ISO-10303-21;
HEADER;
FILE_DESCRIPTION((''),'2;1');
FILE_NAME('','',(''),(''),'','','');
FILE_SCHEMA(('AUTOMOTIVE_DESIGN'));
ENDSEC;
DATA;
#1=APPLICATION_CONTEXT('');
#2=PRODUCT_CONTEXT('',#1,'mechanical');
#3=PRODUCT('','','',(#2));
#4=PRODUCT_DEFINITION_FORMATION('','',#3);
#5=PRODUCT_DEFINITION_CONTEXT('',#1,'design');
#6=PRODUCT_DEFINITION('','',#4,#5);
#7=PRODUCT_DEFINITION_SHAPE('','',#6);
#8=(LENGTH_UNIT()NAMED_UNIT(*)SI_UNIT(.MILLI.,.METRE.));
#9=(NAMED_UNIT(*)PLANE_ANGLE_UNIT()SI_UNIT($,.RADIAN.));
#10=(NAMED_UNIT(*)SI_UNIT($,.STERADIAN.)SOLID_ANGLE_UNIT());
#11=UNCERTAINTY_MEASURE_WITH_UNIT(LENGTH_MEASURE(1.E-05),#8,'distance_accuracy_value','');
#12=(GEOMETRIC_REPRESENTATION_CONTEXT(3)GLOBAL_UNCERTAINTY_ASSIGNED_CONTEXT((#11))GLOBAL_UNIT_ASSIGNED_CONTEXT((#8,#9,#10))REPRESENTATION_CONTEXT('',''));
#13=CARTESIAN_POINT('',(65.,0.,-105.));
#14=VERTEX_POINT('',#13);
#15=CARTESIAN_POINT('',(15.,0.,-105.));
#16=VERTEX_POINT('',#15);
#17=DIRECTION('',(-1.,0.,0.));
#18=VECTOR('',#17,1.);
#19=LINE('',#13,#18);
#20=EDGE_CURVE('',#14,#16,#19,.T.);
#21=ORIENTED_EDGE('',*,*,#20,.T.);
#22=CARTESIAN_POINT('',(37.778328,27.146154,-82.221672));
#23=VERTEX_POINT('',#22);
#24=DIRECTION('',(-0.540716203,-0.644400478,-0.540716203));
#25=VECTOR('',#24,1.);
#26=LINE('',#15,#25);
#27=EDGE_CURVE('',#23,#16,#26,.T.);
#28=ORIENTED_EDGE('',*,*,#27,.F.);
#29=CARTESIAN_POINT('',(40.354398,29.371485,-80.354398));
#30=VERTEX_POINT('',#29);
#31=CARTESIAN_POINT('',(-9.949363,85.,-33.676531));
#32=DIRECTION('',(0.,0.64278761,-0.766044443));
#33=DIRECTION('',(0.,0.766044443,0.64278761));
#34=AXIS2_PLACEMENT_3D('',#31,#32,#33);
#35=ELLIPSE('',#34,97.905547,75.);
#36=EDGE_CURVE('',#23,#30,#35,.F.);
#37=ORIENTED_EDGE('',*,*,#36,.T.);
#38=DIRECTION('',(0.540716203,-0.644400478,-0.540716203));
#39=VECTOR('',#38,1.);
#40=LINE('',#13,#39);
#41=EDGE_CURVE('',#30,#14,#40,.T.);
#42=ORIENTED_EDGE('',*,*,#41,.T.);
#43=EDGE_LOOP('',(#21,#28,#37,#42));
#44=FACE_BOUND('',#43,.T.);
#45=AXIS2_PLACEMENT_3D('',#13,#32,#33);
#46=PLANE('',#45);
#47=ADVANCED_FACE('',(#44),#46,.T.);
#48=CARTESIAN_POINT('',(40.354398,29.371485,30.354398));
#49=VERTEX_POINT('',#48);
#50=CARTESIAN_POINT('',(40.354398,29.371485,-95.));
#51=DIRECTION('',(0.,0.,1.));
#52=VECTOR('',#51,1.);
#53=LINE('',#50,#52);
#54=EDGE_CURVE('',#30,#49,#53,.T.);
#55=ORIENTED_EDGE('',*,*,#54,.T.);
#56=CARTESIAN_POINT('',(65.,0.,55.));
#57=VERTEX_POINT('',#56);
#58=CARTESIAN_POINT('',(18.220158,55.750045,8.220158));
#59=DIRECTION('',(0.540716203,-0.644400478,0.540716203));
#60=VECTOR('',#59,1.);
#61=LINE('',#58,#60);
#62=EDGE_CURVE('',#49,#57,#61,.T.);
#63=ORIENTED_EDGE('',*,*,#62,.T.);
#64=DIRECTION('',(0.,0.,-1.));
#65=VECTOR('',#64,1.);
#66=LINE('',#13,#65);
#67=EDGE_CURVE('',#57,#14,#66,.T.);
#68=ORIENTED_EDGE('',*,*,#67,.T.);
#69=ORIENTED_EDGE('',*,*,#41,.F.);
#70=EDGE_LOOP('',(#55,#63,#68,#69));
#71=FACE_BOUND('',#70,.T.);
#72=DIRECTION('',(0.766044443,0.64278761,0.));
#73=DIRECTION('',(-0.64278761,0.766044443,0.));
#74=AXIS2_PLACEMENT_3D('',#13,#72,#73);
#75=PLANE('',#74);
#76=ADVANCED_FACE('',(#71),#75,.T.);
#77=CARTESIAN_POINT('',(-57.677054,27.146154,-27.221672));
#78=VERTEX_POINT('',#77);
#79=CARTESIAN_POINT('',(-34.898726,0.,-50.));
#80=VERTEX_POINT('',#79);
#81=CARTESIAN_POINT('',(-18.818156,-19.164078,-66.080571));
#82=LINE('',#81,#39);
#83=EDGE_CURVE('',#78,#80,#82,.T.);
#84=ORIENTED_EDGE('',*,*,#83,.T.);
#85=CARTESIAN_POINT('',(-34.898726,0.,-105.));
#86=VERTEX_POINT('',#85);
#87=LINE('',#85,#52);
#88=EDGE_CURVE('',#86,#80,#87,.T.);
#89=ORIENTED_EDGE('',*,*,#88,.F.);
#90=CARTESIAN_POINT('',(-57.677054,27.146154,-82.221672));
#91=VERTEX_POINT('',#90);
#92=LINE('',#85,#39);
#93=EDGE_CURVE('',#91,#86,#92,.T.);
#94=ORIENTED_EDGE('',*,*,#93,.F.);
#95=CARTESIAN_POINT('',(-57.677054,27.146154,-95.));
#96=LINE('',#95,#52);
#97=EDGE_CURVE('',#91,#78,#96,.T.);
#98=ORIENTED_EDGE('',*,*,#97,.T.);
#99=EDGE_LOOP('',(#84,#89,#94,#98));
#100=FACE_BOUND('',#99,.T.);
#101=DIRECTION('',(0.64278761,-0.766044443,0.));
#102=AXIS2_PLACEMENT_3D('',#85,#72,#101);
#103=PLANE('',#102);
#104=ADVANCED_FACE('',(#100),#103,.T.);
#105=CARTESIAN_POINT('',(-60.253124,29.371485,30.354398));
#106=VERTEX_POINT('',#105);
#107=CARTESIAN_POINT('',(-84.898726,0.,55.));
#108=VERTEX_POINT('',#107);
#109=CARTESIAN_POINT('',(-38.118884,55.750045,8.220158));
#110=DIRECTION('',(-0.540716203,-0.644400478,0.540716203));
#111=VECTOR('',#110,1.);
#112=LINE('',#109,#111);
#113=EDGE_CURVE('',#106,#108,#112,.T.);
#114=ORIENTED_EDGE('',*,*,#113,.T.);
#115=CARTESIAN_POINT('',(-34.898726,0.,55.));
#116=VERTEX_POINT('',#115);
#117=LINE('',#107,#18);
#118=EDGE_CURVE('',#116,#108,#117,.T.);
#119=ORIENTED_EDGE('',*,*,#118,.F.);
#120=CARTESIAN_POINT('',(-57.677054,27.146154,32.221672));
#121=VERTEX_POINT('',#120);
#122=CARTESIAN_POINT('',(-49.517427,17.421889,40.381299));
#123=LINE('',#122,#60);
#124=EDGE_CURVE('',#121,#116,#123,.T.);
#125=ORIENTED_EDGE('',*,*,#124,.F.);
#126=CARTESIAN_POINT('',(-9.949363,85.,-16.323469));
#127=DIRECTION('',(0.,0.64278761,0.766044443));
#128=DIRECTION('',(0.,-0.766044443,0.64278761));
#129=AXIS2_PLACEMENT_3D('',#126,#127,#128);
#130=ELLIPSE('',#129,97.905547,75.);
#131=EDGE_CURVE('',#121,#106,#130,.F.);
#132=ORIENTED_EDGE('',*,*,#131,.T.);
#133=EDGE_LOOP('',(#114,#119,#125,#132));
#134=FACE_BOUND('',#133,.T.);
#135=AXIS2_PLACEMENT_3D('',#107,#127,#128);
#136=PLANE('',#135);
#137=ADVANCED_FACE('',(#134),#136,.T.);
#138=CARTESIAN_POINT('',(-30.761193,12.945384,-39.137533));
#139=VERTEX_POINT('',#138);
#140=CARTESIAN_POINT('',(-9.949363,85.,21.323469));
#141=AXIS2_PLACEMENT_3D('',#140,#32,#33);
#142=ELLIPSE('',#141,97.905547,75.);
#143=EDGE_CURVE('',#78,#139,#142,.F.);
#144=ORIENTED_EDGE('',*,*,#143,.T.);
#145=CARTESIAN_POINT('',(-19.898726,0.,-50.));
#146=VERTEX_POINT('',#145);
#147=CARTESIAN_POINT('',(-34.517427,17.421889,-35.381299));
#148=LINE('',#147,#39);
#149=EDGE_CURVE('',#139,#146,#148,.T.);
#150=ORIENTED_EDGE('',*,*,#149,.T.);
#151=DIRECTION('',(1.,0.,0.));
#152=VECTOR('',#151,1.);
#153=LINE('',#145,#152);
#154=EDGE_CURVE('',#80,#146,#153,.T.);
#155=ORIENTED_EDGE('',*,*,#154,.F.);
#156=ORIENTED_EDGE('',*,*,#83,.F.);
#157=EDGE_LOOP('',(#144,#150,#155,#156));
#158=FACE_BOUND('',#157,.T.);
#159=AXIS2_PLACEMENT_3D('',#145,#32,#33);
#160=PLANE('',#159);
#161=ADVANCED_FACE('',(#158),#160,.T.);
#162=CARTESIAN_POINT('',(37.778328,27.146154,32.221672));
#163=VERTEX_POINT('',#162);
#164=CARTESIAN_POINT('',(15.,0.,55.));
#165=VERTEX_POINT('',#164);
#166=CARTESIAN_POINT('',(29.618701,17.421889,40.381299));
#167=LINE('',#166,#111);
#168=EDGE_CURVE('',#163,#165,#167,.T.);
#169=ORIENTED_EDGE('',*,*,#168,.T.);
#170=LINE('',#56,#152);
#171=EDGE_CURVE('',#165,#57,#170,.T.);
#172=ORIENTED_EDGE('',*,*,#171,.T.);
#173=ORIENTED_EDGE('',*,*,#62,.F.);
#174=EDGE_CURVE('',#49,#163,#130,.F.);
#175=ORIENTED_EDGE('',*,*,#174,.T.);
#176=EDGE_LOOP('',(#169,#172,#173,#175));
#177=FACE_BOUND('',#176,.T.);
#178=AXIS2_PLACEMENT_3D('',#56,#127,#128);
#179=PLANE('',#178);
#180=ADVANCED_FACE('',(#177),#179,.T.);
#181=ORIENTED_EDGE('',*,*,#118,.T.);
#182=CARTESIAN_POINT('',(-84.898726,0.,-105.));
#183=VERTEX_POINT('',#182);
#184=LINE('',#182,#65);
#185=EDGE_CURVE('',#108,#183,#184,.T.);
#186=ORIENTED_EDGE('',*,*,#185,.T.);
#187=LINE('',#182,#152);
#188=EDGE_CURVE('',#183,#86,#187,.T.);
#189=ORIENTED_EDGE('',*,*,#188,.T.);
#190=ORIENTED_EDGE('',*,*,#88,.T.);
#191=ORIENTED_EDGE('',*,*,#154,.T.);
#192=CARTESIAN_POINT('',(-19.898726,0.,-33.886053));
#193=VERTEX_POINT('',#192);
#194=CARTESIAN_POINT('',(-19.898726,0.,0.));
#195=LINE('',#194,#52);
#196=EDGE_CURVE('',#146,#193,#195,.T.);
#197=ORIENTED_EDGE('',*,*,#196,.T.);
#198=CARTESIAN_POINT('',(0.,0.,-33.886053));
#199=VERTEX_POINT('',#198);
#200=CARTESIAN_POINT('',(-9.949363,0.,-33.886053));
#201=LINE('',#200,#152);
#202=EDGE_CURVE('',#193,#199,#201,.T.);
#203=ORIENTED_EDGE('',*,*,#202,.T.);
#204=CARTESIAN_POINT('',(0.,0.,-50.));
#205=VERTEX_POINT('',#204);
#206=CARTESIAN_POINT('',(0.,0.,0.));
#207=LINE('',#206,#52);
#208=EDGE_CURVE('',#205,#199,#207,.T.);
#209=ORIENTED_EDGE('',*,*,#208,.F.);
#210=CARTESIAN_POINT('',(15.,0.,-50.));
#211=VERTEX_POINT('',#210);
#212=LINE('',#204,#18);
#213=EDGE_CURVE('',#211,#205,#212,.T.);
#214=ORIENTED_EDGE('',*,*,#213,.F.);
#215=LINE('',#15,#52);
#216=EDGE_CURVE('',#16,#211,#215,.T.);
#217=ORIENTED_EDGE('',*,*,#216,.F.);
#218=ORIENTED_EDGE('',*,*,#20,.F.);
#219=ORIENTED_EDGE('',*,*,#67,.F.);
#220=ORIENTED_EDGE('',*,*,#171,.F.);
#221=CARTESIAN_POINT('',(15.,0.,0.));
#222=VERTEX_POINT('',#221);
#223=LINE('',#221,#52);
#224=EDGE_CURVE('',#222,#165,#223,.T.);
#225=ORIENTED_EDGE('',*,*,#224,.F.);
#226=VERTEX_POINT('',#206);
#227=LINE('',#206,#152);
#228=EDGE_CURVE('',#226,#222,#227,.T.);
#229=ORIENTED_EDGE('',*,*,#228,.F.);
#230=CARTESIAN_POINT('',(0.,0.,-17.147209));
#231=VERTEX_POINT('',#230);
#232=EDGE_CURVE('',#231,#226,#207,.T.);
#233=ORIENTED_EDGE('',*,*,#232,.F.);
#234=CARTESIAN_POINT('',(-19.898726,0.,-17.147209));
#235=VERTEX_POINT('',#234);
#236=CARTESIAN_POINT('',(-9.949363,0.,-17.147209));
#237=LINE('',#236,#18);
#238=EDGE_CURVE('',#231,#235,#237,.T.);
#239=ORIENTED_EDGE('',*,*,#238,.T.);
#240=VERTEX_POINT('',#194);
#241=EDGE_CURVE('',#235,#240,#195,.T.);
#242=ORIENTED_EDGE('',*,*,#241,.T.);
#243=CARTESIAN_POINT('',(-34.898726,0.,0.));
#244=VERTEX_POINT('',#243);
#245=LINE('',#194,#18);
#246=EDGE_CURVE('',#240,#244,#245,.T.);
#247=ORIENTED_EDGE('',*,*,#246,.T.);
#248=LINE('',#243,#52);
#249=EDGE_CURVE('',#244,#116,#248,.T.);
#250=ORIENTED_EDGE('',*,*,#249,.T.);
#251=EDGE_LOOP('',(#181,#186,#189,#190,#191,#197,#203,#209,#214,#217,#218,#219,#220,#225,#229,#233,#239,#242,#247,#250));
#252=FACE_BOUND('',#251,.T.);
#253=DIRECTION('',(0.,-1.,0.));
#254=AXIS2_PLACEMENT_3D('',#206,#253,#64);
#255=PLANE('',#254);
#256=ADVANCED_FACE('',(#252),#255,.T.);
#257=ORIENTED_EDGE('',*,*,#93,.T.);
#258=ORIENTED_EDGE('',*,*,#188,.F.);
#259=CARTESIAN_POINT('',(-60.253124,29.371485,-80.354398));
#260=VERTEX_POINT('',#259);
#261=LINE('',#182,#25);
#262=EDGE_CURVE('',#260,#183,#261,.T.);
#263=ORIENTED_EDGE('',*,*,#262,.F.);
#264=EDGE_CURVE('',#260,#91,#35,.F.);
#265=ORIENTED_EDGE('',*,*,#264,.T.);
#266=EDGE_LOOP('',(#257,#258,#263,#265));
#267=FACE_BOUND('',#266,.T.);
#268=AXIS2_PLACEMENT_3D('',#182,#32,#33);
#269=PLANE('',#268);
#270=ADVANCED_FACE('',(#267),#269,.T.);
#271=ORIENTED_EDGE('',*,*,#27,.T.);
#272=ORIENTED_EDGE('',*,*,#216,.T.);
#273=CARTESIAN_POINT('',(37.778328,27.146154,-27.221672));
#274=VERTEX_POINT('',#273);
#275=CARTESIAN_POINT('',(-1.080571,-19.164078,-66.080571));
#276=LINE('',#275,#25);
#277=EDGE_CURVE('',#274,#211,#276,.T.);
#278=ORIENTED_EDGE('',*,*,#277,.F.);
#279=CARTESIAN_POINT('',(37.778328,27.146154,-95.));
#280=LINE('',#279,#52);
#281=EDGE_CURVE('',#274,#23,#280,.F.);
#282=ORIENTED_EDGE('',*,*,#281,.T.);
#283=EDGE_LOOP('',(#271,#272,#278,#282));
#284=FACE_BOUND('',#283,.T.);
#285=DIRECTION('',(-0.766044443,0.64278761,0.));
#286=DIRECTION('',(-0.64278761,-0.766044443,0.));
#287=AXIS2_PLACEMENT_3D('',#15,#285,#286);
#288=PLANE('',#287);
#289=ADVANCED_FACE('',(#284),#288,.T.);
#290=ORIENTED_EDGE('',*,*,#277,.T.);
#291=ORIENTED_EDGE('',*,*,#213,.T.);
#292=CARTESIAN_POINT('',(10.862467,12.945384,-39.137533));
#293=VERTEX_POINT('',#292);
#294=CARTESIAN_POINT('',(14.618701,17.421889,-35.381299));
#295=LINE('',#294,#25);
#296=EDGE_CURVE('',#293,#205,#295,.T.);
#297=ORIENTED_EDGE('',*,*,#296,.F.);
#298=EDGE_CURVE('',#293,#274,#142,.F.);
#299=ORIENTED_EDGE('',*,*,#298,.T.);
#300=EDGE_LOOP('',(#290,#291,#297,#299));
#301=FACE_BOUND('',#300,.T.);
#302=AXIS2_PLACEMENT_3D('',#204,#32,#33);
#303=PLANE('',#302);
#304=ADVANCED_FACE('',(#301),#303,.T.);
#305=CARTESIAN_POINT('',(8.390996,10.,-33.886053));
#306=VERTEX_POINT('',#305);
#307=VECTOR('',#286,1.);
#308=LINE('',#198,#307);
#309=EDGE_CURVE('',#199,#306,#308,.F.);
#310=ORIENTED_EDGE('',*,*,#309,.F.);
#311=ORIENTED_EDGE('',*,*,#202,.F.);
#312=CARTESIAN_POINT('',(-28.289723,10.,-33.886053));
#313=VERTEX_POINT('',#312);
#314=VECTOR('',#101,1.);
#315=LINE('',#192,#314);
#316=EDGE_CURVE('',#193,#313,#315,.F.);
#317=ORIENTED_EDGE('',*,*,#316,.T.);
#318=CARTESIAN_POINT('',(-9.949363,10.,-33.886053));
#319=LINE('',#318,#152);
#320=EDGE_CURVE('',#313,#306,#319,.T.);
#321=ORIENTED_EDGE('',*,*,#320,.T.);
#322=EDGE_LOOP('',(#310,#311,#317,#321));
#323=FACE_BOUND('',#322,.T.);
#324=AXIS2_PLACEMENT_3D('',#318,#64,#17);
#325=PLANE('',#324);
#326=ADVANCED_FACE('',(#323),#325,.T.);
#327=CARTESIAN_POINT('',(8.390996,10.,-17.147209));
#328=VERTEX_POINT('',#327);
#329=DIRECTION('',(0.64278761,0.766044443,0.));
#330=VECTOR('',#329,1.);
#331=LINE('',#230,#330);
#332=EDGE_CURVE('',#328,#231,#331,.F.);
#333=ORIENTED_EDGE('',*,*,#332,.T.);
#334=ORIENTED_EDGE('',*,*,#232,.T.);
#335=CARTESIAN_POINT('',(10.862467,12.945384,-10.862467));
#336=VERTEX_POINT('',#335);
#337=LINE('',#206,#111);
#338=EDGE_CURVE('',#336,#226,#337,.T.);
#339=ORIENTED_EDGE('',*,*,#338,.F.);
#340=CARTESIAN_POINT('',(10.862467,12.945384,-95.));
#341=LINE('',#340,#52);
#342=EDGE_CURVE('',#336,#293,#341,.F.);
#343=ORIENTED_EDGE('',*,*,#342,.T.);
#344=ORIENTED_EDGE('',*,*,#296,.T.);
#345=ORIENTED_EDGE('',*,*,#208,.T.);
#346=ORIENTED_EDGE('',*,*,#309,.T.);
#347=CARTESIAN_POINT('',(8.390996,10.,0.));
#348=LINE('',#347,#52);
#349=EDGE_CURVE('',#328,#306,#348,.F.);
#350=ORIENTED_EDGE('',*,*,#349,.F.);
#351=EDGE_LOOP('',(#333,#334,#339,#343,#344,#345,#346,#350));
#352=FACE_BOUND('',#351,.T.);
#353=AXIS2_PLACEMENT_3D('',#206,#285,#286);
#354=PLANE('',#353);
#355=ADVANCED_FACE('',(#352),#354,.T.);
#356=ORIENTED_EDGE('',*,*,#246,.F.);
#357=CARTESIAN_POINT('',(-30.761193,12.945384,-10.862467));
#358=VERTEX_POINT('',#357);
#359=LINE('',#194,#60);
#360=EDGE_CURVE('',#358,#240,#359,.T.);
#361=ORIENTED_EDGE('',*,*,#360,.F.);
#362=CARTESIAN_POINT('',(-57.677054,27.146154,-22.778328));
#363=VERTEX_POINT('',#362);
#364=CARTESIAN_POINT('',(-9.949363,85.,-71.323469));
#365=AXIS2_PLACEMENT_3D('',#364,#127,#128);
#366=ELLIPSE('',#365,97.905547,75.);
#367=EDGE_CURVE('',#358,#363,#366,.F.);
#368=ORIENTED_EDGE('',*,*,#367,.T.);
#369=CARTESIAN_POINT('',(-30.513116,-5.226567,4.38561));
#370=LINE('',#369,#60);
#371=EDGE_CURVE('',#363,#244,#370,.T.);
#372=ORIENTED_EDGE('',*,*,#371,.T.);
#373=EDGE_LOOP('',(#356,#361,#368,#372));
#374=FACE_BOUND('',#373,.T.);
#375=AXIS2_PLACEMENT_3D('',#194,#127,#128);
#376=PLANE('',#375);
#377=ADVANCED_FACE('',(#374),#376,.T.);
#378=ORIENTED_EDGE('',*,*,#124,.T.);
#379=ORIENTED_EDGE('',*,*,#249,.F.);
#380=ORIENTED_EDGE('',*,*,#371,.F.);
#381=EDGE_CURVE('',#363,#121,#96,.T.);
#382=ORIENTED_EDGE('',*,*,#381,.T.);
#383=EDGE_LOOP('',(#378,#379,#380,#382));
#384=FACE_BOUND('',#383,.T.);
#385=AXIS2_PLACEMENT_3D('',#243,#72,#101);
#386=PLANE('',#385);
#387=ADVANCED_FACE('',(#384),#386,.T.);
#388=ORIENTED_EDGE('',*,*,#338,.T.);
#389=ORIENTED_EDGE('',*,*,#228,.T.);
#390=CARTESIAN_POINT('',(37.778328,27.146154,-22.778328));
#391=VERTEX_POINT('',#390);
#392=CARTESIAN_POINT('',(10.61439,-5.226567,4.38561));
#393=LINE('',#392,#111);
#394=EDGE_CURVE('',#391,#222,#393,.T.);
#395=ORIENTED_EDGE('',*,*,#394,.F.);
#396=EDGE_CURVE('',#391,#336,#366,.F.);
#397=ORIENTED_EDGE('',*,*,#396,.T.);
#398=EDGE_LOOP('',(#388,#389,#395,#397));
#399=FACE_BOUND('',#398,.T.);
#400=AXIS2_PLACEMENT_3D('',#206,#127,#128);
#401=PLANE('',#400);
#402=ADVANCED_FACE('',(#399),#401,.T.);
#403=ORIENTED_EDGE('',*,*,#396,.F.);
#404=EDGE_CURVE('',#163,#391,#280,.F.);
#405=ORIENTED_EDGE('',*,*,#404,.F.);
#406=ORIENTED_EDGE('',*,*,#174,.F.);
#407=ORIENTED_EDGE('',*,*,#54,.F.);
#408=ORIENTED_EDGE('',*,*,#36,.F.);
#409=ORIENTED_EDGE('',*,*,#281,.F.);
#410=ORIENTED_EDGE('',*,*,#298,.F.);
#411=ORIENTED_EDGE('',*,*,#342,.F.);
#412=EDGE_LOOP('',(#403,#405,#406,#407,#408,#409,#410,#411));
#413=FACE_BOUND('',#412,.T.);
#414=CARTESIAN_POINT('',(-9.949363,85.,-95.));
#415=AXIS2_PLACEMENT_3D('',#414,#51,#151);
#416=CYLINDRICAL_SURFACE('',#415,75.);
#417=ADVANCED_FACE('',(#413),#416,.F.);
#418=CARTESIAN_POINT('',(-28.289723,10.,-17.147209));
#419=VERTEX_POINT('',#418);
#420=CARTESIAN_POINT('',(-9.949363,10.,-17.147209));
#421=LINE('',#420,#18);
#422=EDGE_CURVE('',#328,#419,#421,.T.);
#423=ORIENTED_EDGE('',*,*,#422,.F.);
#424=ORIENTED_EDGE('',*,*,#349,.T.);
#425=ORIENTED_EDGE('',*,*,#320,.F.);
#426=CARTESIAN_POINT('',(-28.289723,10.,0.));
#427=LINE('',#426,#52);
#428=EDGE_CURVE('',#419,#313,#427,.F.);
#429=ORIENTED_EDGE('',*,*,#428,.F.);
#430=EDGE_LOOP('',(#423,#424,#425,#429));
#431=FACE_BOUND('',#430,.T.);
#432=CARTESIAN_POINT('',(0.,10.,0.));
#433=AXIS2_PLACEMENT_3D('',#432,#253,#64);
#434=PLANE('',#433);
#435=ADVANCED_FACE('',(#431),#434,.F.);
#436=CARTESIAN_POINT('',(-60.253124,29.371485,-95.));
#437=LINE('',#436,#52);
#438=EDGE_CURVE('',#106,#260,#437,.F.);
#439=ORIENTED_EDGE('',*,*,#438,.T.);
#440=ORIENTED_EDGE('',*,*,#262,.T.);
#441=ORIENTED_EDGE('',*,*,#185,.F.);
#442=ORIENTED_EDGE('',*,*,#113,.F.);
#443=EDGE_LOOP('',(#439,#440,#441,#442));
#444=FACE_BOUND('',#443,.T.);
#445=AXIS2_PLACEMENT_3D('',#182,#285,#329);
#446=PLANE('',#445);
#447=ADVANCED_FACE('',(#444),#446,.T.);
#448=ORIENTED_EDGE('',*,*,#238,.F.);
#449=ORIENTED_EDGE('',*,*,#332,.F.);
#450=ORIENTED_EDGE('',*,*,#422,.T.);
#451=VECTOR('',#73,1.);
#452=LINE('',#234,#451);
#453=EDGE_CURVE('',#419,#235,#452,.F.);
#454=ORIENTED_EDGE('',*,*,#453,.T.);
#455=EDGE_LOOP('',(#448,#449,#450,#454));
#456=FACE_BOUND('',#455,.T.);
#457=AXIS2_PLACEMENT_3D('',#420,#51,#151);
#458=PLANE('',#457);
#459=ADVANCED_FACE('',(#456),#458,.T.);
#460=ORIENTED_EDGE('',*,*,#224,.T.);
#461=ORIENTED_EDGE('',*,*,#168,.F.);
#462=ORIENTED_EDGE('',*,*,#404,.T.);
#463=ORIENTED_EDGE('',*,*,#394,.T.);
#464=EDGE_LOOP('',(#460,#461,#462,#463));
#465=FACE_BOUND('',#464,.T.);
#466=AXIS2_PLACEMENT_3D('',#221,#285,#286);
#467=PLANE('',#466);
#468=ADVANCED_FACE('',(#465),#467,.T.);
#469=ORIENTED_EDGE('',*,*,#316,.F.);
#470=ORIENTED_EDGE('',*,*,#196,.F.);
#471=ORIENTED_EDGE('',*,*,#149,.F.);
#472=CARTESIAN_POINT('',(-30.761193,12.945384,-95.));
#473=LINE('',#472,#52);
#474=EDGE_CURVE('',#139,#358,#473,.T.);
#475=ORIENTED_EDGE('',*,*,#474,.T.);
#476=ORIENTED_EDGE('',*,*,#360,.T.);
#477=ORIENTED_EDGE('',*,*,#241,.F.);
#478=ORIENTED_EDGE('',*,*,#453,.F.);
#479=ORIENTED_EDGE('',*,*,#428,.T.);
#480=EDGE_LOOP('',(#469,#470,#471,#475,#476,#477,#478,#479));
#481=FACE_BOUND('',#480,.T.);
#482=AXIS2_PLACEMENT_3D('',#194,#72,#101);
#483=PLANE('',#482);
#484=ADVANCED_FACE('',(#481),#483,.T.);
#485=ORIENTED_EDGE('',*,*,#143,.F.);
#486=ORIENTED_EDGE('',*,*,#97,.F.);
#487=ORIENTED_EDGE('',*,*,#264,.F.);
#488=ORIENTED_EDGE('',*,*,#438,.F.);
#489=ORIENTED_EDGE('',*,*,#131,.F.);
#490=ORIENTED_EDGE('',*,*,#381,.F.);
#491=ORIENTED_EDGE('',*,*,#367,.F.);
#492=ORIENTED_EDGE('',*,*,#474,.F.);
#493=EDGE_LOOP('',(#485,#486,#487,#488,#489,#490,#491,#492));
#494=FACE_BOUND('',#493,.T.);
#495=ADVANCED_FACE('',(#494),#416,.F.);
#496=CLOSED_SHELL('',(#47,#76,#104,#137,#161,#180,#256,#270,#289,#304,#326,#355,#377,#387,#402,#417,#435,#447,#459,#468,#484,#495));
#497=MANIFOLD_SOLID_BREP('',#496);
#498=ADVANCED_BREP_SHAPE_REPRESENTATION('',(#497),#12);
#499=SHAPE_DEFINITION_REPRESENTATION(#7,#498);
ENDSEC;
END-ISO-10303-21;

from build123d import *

# Parameters (mm, degrees)
BOSS_EXTRUDE1_START       = -105
BOSS_EXTRUDE1_DEPTH       = 160
BOSS_EXTRUDE1_2_DEPTH     = 40
BOSS_EXTRUDE1_START_2     = -20
BOSS_EXTRUDE1_3_OUTLINE_W = 48
BOSS_EXTRUDE1_3_OUTLINE_H = 147
BOSS_EXTRUDE1_3_DEPTH     = 20
BOSS_EXTRUDE1_START_3     = 42.132444372
BOSS_EXTRUDE1_4_OUTLINE_W = 52
BOSS_EXTRUDE1_4_OUTLINE_H = 116
BOSS_EXTRUDE1_4_DEPTH     = 19.867555628
BOSS_EXTRUDE1_START_4     = 80.434666527
BOSS_EXTRUDE1_5_OUTLINE_W = 52
BOSS_EXTRUDE1_5_OUTLINE_H = 117
BOSS_EXTRUDE1_5_DEPTH     = 20.565333473
SKETCH2_W                 = 21.285197014
SKETCH2_H                 = 16.738844255
BOSS_EXTRUDE2_DEPTH       = 10
SKETCH3_R                 = 75
CUT_EXTRUDE1_DEPTH        = 95


with BuildPart() as part:
    # Boss-Extrude1: read off the stored shape, not the designer's step
    # Boss-Extrude1 outline → Boss-Extrude1 (new body)
    with BuildSketch(Plane.XY.offset(BOSS_EXTRUDE1_START)):
        Polygon((65, 0), (40, 29.793839815), (15, 0), align=None)
    extrude(amount=BOSS_EXTRUDE1_DEPTH)

    # Boss-Extrude1 2 outline → Boss-Extrude1 2 (add)
    with BuildSketch(Plane.YZ):
        Polygon((0, -50), (29.793839815, -25), (0, 0), align=None)
    extrude(amount=BOSS_EXTRUDE1_2_DEPTH)

    # Boss-Extrude1 3 outline → Boss-Extrude1 3 (cut)
    with BuildSketch(Plane(origin=(0, 0, 0), x_dir=(0.6427876096865404, 0.7660444431189772, 0), z_dir=(0.7660444431189772, -0.6427876096865403, 0)).offset(BOSS_EXTRUDE1_START_2)):
        with Locations((22, -24.5)):
            Rectangle(BOSS_EXTRUDE1_3_OUTLINE_W, BOSS_EXTRUDE1_3_OUTLINE_H)
    extrude(amount=BOSS_EXTRUDE1_3_DEPTH, mode=Mode.SUBTRACT)

    # Boss-Extrude1 4 outline → Boss-Extrude1 4 (cut)
    with BuildSketch(Plane(origin=(0, 0, 0), x_dir=(1, 0, 0), z_dir=(0, 0.6427876096865403, 0.7660444431189772)).offset(BOSS_EXTRUDE1_START_3)):
        with Locations((40, 21)):
            Rectangle(BOSS_EXTRUDE1_4_OUTLINE_W, BOSS_EXTRUDE1_4_OUTLINE_H)
    extrude(amount=BOSS_EXTRUDE1_4_DEPTH, mode=Mode.SUBTRACT)

    # Boss-Extrude1 5 outline → Boss-Extrude1 5 (cut)
    with BuildSketch(Plane(origin=(0, 0, 0), x_dir=(1, 0, 0), z_dir=(0, 0.6427876096865403, -0.7660444431189772)).offset(BOSS_EXTRUDE1_START_4)):
        with Locations((40, 10.5)):
            Rectangle(BOSS_EXTRUDE1_5_OUTLINE_W, BOSS_EXTRUDE1_5_OUTLINE_H)
    extrude(amount=BOSS_EXTRUDE1_5_DEPTH, mode=Mode.SUBTRACT)

    # Sketch2 → Boss-Extrude2 (add)
    with BuildSketch(Plane.XZ):
        with Locations((0.693235287, -25.516630996)):
            Rectangle(SKETCH2_W, SKETCH2_H)
    extrude(amount=-BOSS_EXTRUDE2_DEPTH)

    # Mirror8: part across plane


with BuildPart() as part_1:
    add(part.part)
    add(part.part.mirror(Plane(origin=(-9.94936322, 10, -17.147208868), x_dir=(0, 0, 1), z_dir=(-1, 0, 0))))

    # Sketch3 → Cut-Extrude1 (cut, symmetric)
    with BuildSketch(Plane.XY):
        with Locations((-9.94936322, 85)):
            Circle(SKETCH3_R)
    extrude(amount=CUT_EXTRUDE1_DEPTH, both=True, mode=Mode.SUBTRACT)


solid = part_1.part
